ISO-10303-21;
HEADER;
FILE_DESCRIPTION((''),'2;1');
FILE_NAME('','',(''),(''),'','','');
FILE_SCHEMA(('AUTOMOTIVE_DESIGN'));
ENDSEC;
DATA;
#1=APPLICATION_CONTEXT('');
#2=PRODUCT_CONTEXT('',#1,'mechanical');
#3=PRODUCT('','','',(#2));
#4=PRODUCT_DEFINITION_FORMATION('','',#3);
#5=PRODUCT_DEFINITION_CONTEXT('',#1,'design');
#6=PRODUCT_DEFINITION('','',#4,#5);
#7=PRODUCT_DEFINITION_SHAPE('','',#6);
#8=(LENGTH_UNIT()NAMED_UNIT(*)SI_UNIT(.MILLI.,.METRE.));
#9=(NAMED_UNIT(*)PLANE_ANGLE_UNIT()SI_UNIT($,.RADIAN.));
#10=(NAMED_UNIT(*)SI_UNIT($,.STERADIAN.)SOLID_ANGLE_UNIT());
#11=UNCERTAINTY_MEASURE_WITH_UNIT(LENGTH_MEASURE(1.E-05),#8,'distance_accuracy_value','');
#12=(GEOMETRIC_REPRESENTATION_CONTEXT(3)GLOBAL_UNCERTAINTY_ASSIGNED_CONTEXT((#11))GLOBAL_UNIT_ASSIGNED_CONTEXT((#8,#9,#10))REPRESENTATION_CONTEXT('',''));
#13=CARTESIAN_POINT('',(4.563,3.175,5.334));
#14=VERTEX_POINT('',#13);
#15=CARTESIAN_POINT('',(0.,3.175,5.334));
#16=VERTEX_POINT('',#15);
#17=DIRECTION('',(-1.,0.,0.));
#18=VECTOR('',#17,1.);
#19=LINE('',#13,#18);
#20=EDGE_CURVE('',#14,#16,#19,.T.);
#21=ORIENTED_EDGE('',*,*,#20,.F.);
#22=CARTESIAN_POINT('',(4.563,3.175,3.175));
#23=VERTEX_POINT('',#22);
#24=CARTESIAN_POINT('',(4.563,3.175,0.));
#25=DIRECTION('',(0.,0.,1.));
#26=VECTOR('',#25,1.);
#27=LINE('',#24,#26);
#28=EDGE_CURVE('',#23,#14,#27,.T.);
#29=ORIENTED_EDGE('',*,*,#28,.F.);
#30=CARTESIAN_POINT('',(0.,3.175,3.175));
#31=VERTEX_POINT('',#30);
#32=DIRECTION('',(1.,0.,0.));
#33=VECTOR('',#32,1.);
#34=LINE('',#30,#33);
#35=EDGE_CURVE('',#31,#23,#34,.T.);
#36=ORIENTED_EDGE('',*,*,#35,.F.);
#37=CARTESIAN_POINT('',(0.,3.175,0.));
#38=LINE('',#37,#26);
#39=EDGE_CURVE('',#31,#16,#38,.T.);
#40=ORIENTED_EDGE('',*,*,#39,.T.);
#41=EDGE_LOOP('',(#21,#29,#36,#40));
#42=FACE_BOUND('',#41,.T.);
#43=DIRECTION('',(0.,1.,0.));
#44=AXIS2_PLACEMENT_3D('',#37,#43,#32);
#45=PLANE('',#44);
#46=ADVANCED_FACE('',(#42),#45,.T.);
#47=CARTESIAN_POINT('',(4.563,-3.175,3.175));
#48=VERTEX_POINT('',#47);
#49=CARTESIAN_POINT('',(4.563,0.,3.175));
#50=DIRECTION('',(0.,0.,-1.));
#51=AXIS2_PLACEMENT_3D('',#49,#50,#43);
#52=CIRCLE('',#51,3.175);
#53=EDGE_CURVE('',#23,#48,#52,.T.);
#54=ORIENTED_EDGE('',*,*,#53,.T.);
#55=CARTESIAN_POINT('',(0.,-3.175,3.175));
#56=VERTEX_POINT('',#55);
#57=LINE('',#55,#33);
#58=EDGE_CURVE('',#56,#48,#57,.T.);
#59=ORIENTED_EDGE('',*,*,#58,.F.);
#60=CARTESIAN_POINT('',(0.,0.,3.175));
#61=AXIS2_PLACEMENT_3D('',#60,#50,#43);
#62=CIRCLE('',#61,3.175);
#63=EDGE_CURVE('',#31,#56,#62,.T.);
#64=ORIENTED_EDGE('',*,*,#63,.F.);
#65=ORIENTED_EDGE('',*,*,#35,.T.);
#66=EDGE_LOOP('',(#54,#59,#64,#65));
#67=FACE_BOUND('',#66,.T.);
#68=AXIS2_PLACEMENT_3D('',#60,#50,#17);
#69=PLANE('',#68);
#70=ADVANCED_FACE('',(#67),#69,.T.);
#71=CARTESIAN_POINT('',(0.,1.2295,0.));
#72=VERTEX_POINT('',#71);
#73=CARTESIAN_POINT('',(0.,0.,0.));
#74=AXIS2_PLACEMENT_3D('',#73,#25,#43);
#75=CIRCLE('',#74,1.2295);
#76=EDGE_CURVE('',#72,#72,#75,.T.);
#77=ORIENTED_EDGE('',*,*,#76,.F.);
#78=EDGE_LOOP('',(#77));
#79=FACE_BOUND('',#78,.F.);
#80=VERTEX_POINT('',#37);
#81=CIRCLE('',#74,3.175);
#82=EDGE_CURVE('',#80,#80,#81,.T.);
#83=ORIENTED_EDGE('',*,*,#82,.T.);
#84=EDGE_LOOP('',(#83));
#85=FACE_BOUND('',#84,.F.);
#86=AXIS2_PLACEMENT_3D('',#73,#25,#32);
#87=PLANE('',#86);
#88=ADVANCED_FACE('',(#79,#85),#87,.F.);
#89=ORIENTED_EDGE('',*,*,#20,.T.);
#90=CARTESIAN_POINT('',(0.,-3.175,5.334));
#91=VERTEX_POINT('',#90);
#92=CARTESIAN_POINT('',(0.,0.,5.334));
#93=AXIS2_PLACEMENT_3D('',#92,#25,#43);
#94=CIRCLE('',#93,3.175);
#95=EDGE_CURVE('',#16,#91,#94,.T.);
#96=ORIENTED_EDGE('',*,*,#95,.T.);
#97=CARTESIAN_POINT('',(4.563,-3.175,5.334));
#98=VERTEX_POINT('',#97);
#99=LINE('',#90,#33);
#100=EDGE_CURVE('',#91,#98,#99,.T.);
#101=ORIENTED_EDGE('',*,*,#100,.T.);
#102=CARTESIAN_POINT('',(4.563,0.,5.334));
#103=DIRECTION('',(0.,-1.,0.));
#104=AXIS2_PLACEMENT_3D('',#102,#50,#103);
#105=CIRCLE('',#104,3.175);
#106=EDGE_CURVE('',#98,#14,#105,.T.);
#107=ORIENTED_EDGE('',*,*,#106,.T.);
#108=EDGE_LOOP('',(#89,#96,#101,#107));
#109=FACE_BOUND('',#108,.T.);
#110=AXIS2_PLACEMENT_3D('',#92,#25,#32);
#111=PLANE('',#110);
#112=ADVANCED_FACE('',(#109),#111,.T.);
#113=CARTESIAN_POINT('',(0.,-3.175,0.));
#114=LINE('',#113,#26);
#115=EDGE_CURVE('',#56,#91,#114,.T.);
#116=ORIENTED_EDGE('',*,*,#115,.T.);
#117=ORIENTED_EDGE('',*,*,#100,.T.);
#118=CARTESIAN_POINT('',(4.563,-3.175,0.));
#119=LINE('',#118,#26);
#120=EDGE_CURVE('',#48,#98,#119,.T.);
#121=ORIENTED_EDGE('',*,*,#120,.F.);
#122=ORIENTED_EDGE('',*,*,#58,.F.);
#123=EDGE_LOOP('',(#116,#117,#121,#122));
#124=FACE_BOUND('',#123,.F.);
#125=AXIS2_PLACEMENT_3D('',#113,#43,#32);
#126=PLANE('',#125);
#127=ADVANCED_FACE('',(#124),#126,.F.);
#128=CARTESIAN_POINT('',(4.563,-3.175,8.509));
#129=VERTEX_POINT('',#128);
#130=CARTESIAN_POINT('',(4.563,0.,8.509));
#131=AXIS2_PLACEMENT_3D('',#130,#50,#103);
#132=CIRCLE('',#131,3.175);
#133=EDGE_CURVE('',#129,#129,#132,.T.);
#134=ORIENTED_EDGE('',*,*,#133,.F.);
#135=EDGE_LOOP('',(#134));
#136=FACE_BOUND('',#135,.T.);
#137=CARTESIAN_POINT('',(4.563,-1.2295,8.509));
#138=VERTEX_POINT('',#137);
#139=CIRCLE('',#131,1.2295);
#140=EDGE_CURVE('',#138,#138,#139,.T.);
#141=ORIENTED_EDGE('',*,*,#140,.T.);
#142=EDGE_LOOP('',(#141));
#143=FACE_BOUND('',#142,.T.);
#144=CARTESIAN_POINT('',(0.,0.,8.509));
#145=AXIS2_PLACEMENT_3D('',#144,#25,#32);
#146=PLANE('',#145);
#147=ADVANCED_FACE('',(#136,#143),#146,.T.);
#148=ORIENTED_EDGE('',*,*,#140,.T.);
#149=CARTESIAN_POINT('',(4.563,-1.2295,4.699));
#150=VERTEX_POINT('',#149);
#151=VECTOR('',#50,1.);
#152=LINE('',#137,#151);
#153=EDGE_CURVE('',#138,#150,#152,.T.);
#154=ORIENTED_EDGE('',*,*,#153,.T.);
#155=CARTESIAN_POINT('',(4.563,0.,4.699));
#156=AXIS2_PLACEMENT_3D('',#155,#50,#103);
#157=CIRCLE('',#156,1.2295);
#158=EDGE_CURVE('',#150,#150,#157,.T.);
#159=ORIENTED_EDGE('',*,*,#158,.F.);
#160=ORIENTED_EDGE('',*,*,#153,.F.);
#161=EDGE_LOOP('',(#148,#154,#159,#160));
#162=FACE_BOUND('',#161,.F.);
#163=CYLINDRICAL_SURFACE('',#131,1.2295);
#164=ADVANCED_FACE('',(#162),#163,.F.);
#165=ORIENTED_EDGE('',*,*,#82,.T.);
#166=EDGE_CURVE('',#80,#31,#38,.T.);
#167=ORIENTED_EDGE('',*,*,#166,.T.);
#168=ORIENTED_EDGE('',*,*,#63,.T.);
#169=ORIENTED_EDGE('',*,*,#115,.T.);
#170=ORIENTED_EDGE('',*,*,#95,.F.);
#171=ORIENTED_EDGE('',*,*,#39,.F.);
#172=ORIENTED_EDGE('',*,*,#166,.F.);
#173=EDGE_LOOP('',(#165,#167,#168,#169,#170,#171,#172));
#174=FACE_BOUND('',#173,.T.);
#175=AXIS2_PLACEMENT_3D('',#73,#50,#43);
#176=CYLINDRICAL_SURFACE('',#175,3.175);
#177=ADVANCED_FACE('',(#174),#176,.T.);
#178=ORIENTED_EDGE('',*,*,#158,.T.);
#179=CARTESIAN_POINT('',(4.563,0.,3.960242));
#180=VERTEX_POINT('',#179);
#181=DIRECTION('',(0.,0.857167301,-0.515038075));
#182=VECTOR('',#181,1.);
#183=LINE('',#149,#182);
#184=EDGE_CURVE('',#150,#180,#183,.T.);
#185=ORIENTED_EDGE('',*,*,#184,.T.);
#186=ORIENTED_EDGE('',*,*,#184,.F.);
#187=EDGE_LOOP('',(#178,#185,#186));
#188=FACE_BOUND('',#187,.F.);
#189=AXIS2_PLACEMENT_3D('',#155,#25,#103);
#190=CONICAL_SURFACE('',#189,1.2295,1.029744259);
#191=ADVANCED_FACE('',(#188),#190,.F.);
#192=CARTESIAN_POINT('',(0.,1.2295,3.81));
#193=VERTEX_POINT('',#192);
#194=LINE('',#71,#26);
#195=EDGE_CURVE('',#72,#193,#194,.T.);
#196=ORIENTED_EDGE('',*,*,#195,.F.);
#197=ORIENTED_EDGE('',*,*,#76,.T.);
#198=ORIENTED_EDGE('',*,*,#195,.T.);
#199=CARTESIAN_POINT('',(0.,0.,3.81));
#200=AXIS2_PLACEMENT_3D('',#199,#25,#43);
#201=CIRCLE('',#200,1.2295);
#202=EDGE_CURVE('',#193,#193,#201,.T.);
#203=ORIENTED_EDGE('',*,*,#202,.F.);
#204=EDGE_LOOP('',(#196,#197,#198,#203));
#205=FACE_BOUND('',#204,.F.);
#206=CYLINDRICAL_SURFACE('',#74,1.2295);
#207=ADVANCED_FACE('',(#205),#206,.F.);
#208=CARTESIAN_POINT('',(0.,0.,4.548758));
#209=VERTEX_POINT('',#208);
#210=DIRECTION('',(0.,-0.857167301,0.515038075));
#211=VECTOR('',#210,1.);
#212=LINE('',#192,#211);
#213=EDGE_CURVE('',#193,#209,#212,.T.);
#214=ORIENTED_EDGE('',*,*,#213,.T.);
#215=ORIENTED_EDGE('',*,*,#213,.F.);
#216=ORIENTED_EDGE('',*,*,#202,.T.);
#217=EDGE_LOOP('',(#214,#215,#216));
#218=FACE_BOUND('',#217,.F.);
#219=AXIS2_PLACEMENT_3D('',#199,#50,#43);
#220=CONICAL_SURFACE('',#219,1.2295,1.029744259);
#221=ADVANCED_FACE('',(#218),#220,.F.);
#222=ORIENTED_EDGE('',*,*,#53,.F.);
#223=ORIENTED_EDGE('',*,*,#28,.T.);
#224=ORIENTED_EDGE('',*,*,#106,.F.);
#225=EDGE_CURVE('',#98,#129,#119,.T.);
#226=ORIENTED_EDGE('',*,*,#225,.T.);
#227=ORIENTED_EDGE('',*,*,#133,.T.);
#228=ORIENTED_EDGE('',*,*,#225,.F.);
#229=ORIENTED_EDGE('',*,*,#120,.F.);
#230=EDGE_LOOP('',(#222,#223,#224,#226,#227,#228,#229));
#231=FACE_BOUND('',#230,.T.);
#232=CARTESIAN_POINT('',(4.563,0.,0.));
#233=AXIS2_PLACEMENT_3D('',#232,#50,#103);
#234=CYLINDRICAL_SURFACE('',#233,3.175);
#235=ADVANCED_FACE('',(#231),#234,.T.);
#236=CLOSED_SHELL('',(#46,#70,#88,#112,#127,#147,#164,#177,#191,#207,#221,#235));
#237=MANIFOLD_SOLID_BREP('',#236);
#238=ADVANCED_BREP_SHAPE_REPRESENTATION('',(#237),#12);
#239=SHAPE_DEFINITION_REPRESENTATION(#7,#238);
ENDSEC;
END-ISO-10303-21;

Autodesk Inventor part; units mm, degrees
ref_plane "YZ Plane" through (0, 0, 0) normal (1, 0, 0) x (0, 1, 0)
ref_plane "XZ Plane" through (0, 0, 0) normal (0, 1, 0) x (-1, 0, 0)
ref_plane "XY Plane" through (0, 0, 0) normal (0, 0, 1) x (1, 0, 0)
sketch "Sketch2" plane through (0, 0, 0) normal (0, 0, 1) x (1, 0, 0)
  arc A0 (4.563, -3.175) -> (4.563, 3.175) centre (4.563, 0) ccw
  arc A1 (0, 3.175) -> (0, -3.175) centre (0, 0) ccw
  line L0 (0, 3.175) -> (4.563, 3.175)
  line L1 (0, -3.175) -> (4.563, -3.175)
  dimension "d14" = 6.35
  dimension "d15" = 6.35
  dimension "d16" = 0
  dimension "d17" = 0
  dimension "d18" = 4.563
  dimension "d19" = 0
extrude "Extrusion2" add sketch "Sketch2" along normal blind 8.509
sketch "Sketch3" plane through (0, 0, 8.509) normal (0, 0, 1) x (1, 0, 0)
  point P0 (0, 0)
  point P1 (4.563, 0)
  dimension "d22" = 4.563
  dimension "d23" = 0
hole "Hole1" at (4.563, 0, 8.509) direction (0, 0, -1) diameter 2.459 depth 3.81 tip angle 118 thread size "M3x0.5" class "6H" standard "ISO Metric profile"
sketch "Sketch4" plane through (0, 0, 0) normal (0, 0, -1) x (-1, 0, 0)
  point P0 (0, 0)
hole "Hole2" at (0, 0, 0) direction (0, 0, 1) diameter 2.459 depth 3.81 tip angle 118 thread size "M3x0.5" class "6H" standard "ISO Metric profile"
sketch "Sketch7" plane through (0, 0, 0) normal (0, 0, -1) x (-1, 0, 0)
  arc A0 (0, 3.175) -> (0, -3.175) centre (0, 0) ccw
  arc A1 (-4.563, 3.175) -> (-4.563, -3.175) centre (-4.563, 0) ccw projected
  arc A2 (-4.563, 3.175) -> (-4.563, -3.175) centre (-4.563, 0) ccw
  line L0 (0, -3.175) -> (-4.563, -3.175) projected
  line L1 (-4.563, -3.175) -> (0, -3.175)
  line L2 (0, 3.175) -> (-4.563, 3.175)
extrude "Extrusion5" cut sketch "Sketch7" against normal blind 3.175
sketch "Sketch8" plane through (0, 0, 8.509) normal (0, 0, 1) x (1, 0, 0)
  arc A0 (0, 3.175) -> (0, -3.175) centre (0, 0) ccw
  arc A1 (4.563, 3.175) -> (4.563, -3.175) centre (4.563, 0) ccw
  line L0 (4.563, 3.175) -> (0, 3.175) projected
  line L1 (0, 3.175) -> (4.563, 3.175)
  line L2 (0, -3.175) -> (4.563, -3.175) projected
  line L3 (4.563, -3.175) -> (0, -3.175)
sketch "Sketch8 outline for Extrusion6" plane through (0, 0, 8.509) normal (0, 0, 1) x (1, 0, 0)
  arc A0 (0, 3.175) -> (0, -3.175) centre (0, 0) ccw
  line L0 (4.563, 3.175) -> (0, 3.175)
  arc A1 (4.563, -3.175) -> (4.563, 3.175) centre (4.563, 0) cw
  line L1 (0, -3.175) -> (4.563, -3.175)
extrude "Extrusion6" cut sketch "Sketch8 outline for Extrusion6" against normal blind 3.175
properties part number "PC104_EM-113 standoff_4.563"
